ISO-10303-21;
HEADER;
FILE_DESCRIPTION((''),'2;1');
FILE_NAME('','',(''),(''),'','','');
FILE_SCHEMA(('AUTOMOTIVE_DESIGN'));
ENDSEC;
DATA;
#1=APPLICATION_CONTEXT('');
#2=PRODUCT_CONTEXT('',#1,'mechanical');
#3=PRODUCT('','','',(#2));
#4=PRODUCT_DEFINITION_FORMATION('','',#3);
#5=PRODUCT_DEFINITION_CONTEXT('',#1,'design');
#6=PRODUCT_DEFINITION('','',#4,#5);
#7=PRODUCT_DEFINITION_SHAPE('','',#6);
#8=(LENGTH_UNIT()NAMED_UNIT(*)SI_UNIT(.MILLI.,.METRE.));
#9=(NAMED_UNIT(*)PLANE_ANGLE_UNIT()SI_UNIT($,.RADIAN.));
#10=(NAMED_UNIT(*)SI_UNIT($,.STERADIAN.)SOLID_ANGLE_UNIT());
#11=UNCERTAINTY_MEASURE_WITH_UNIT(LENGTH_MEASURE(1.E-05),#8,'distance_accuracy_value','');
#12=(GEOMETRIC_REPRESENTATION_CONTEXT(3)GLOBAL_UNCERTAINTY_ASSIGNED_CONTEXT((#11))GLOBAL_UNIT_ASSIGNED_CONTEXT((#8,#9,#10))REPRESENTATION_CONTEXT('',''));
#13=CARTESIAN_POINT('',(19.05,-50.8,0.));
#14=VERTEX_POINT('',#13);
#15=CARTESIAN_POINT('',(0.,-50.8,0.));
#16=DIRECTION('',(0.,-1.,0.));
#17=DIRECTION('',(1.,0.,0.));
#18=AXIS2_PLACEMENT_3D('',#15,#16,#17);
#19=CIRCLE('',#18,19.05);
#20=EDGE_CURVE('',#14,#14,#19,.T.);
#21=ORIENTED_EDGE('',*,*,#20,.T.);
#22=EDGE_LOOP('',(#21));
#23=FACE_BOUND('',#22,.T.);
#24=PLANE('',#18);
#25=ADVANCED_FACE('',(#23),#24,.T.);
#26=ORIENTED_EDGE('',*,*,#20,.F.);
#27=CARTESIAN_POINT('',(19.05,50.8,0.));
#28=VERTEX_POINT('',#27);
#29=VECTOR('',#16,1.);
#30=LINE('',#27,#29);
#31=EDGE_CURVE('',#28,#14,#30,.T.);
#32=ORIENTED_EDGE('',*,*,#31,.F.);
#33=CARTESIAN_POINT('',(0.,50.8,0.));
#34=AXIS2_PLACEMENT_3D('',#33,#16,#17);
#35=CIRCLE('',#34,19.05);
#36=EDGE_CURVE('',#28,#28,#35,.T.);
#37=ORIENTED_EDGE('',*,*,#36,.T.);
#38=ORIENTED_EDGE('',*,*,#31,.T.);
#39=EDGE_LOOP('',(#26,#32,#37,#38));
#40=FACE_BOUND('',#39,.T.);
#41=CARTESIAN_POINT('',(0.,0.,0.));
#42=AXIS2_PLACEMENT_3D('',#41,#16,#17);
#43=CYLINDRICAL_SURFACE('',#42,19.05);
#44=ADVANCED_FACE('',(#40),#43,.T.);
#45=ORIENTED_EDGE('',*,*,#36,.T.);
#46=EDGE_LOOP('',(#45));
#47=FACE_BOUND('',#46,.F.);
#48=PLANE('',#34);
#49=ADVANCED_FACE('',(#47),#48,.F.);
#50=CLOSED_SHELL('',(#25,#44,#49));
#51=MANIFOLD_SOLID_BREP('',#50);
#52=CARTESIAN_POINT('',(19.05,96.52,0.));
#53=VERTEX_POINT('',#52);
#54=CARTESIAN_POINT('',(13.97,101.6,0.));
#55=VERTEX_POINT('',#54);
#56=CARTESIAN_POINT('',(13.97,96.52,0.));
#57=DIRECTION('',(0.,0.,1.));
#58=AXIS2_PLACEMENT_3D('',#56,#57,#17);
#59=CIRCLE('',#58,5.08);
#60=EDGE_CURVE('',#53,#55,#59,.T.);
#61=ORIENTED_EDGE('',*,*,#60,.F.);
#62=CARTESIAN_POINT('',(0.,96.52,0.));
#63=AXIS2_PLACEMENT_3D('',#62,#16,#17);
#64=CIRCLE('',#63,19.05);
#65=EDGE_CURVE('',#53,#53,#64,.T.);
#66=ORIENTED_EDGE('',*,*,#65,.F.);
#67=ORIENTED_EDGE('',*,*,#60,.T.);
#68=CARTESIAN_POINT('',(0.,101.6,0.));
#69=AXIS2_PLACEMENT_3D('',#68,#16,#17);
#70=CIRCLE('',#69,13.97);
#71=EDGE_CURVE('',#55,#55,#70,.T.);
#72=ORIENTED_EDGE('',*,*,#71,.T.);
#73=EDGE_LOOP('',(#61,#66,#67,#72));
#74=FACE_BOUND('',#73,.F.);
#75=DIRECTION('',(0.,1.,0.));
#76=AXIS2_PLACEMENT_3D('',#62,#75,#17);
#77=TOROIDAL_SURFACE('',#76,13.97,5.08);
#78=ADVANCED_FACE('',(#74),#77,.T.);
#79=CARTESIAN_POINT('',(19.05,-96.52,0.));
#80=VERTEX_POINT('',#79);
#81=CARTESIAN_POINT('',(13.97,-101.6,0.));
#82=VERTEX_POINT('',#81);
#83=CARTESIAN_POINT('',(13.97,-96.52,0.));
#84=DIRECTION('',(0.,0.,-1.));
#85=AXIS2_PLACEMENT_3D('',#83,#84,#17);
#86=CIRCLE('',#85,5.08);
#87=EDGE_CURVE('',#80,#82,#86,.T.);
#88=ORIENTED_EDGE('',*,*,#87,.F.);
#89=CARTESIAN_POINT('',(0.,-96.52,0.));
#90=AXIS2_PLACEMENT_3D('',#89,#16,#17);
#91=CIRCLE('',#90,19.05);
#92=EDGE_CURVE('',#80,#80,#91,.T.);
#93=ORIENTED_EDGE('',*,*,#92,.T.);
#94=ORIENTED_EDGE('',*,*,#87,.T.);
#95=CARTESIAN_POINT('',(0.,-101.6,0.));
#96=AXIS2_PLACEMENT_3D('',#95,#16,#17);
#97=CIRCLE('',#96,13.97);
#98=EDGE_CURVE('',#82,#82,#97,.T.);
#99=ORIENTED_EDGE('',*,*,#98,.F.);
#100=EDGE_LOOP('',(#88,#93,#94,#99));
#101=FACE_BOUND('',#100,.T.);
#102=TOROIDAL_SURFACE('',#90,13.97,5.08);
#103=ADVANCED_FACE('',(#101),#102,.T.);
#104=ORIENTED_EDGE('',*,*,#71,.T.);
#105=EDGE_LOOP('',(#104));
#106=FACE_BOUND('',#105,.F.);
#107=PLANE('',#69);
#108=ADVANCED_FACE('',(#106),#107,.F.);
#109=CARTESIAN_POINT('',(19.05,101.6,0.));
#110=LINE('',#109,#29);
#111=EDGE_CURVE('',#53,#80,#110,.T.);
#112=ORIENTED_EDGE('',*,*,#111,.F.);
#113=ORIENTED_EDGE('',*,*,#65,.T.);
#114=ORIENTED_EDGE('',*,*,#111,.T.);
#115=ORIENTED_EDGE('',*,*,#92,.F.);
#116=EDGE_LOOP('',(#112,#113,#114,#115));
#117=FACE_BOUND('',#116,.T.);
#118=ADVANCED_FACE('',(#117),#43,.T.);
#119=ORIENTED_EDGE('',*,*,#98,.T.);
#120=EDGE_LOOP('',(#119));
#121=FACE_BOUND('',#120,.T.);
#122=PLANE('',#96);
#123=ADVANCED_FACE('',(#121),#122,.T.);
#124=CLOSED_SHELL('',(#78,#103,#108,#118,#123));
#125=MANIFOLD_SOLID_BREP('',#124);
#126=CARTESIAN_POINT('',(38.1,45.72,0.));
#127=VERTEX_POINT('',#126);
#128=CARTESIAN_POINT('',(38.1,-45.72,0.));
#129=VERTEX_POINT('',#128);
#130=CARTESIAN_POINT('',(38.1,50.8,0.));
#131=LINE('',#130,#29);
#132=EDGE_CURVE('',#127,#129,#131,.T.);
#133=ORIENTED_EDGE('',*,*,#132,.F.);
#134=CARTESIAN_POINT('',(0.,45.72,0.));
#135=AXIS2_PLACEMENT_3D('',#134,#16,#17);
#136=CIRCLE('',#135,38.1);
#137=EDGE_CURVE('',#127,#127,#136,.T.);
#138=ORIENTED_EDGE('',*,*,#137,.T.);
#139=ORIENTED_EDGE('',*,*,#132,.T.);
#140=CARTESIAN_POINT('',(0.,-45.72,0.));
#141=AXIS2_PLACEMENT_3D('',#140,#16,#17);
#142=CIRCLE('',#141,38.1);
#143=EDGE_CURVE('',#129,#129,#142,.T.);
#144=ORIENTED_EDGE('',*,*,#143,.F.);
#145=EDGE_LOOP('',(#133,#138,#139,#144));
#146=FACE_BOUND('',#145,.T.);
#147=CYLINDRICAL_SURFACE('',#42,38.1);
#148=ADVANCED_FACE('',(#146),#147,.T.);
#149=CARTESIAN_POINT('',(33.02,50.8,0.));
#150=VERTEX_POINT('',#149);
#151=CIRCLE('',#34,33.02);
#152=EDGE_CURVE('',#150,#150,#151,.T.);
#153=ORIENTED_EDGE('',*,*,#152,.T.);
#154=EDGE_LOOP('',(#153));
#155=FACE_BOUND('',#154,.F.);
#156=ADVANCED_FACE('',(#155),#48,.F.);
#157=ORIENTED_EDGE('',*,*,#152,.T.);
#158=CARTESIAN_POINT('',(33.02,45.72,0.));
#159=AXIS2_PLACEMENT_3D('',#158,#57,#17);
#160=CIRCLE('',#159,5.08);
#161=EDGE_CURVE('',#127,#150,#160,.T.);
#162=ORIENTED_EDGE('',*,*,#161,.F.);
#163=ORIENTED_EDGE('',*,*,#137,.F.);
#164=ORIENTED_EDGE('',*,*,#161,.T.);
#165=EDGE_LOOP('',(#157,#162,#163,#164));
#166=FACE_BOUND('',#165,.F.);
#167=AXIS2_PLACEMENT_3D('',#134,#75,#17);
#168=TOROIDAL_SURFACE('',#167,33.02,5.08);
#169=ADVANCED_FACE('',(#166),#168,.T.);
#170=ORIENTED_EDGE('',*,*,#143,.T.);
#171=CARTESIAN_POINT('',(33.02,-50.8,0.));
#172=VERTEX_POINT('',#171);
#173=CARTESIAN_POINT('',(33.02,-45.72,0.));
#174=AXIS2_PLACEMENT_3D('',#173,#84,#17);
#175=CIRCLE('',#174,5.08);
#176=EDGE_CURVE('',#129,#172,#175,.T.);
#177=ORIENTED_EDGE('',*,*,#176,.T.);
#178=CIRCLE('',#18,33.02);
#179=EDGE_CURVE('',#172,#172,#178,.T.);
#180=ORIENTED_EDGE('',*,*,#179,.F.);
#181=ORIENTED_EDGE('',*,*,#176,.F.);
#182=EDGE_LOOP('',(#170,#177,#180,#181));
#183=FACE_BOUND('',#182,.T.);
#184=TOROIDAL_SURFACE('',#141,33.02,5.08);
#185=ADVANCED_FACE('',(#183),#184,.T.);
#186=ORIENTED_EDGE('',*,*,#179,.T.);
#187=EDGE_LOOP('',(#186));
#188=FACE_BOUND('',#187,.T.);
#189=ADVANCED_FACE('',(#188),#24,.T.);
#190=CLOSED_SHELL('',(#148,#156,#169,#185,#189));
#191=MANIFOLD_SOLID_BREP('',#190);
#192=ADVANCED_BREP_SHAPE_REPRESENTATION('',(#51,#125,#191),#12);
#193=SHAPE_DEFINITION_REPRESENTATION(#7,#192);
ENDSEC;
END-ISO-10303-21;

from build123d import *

# Parameters (mm, degrees)
F1_R     = 19.05
F2_DEPTH = 50.8
F0_R     = 38.1
F3_DEPTH = 101.6
F4_R     = 5.08
F5_R     = 5.08


with BuildPart() as f2:
    # F1 (on Front) → F2 (new body, symmetric)
    with BuildSketch(Plane.XZ):
        Circle(F1_R)
    extrude(amount=F2_DEPTH, both=True)


with BuildPart() as f2b:
    # F0 (on Front) → F2, piece 2 (new body, symmetric)
    with BuildSketch(Plane.XZ):
        Circle(F0_R)
    extrude(amount=F2_DEPTH, both=True)

    # F4
    f4_edges = [f2b.edges().sort_by_distance(p)[0] for p in [
        (-38.1, -50.8, 0),
        (-38.1, 50.8, 0),
    ]]
    fillet(f4_edges, radius=F4_R)


with BuildPart() as f3:
    # F1 (on Front) → F3 (new body, symmetric)
    with BuildSketch(Plane.XZ):
        Circle(F1_R)
    extrude(amount=F3_DEPTH, both=True)

    # F5
    f5_edges = [f3.edges().sort_by_distance(p)[0] for p in [
        (-19.05, 101.6, 0),
        (-19.05, -101.6, 0),
    ]]
    fillet(f5_edges, radius=F5_R)


solid = Compound([f2.part, f2b.part, f3.part])
